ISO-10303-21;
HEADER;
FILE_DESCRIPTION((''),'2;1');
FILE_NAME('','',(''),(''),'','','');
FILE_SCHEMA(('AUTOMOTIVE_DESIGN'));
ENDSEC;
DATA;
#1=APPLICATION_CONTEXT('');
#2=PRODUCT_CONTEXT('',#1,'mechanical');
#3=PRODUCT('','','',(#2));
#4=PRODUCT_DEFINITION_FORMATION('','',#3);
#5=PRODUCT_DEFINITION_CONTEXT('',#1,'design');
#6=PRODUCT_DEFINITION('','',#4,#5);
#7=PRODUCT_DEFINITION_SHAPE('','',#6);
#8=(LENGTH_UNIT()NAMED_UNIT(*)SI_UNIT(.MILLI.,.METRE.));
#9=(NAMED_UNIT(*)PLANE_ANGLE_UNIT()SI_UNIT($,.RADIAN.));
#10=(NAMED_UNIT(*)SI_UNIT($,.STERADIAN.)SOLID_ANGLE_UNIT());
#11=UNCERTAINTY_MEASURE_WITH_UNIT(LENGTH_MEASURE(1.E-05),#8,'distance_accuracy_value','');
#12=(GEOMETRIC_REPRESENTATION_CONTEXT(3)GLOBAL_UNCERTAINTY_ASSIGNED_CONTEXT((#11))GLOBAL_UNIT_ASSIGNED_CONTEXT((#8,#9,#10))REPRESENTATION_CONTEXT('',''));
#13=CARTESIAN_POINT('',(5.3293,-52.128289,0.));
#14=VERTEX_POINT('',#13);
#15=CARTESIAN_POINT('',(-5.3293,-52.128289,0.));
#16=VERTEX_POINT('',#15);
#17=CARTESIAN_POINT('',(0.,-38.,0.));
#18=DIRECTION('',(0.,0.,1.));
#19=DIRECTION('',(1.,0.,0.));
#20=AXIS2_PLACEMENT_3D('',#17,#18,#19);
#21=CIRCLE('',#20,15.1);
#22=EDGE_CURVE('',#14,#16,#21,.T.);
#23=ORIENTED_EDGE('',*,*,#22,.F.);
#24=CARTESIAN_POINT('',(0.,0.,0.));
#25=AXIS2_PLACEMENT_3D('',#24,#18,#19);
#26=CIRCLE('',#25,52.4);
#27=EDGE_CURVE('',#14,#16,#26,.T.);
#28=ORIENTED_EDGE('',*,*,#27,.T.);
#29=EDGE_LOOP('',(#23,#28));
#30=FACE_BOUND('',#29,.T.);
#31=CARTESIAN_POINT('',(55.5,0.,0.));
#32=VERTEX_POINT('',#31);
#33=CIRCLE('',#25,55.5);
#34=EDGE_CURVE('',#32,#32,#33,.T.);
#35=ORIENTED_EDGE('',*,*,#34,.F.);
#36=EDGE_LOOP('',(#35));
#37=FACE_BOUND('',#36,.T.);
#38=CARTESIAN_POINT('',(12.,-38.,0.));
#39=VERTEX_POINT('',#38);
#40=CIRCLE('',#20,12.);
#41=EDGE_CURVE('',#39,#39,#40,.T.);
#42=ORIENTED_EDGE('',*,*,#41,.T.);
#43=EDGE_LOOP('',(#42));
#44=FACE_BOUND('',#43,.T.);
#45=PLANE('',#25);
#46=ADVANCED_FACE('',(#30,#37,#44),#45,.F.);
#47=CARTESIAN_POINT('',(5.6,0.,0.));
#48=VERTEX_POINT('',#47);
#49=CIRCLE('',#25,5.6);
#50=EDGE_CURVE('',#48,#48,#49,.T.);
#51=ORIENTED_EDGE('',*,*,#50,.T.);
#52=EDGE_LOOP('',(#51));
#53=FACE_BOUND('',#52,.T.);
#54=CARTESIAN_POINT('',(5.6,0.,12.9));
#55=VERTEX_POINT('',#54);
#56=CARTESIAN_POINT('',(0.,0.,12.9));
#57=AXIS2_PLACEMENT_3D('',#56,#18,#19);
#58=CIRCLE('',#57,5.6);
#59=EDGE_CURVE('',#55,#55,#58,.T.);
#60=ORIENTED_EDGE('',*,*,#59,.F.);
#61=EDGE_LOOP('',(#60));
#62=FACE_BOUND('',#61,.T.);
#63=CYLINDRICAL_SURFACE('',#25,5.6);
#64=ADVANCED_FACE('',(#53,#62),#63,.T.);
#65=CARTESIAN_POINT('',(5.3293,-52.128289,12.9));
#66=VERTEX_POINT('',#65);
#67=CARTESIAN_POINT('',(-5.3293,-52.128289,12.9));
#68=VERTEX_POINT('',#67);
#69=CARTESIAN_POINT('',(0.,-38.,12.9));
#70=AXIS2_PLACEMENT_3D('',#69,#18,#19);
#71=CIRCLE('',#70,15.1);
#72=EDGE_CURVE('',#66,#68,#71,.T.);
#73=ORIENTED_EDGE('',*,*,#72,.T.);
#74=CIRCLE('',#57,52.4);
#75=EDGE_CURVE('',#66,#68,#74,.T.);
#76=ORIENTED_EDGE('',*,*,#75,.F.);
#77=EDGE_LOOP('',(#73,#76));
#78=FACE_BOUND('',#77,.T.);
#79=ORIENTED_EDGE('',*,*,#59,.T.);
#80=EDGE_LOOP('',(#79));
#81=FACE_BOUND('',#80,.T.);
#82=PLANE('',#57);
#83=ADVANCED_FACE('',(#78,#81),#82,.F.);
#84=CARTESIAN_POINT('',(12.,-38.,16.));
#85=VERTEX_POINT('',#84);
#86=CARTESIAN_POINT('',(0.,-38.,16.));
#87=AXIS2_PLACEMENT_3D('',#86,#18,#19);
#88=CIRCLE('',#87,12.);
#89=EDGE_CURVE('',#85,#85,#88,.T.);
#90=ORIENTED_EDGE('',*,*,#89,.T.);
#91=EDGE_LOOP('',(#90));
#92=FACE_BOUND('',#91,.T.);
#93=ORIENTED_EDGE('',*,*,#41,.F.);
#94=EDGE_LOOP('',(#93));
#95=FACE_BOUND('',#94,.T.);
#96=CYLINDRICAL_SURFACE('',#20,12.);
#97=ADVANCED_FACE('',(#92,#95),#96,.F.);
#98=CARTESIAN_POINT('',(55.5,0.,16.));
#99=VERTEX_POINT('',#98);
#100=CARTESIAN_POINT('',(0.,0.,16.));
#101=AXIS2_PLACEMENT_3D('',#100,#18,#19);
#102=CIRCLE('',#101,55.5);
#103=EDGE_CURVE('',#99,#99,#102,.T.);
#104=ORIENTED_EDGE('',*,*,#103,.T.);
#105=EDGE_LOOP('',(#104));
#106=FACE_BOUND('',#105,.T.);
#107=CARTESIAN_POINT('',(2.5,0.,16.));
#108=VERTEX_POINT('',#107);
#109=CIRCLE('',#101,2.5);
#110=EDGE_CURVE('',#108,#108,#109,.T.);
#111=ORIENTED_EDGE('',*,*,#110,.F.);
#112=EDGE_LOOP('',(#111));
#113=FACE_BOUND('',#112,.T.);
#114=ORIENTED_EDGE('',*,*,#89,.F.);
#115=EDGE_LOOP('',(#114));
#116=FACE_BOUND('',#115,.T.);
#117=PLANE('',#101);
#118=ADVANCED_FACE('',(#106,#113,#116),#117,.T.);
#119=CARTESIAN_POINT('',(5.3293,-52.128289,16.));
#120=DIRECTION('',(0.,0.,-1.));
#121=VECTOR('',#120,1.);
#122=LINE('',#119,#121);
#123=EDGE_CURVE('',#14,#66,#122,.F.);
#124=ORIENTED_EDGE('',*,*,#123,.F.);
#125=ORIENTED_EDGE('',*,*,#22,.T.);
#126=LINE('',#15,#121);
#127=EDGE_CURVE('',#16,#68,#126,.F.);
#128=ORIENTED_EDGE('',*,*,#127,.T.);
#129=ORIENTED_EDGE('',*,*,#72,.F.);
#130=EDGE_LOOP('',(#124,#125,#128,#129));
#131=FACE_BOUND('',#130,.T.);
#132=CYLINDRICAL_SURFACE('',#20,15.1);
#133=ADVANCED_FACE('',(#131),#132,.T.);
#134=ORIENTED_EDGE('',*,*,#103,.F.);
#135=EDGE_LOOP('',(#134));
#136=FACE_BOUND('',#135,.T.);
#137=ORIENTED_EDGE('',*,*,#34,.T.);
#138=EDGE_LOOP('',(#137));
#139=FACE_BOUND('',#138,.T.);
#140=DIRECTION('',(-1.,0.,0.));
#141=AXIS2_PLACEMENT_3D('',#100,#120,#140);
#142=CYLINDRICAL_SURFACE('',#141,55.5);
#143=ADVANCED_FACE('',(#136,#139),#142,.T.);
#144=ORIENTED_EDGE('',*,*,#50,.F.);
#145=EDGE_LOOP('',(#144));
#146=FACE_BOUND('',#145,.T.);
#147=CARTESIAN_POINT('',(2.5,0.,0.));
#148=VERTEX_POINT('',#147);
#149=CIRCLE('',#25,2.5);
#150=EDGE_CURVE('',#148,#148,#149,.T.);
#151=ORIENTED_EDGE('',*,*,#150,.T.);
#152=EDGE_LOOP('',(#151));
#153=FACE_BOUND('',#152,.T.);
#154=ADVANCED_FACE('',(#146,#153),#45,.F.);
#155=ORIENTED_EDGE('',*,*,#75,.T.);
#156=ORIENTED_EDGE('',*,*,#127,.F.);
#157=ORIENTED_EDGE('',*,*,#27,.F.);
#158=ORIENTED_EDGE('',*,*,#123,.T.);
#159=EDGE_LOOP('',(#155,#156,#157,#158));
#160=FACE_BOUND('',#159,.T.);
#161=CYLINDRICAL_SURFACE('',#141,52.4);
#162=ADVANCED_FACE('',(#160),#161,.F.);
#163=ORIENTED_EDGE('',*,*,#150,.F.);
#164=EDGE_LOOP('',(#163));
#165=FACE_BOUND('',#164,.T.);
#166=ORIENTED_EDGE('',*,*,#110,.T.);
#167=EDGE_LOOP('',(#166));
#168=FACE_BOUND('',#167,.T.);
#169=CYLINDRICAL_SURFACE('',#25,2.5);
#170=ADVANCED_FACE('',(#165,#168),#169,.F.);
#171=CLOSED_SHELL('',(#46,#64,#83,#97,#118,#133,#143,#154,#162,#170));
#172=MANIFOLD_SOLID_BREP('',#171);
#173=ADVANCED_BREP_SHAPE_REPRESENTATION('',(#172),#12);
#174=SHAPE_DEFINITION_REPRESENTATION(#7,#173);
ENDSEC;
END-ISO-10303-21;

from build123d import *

# Parameters (mm, degrees)
SKETCH1_R           = 55.5
BOSS_EXTRUDE1_DEPTH = 16
SKETCH2_R           = 12
CUT_EXTRUDE1_DEPTH  = 16
SKETCH3_R           = 2.5
CUT_EXTRUDE2_DEPTH  = 16
SHELL2_OUTLINE_R    = 5.6
SHELL2_DEPTH        = 12.9


# Read off the part's stored shape, not the designer's step: Shell2
with BuildPart() as part:
    # Sketch1 → Boss-Extrude1 (new body)
    with BuildSketch(Plane.XY):
        Circle(SKETCH1_R)
    extrude(amount=BOSS_EXTRUDE1_DEPTH)

    # Sketch2 → Cut-Extrude1 (cut)
    with BuildSketch(Plane.XY.offset(16)):
        with Locations((0, -38)):
            Circle(SKETCH2_R)
    extrude(amount=-CUT_EXTRUDE1_DEPTH, mode=Mode.SUBTRACT)

    # Sketch3 → Cut-Extrude2 (cut)
    with BuildSketch(Plane.XY.offset(16)):
        Circle(SKETCH3_R)
    extrude(amount=-CUT_EXTRUDE2_DEPTH, mode=Mode.SUBTRACT)

    # Shell2 outline → Shell2 (cut)
    with BuildSketch(Plane.XY):
        with BuildLine():
            ThreePointArc((5.329299818, -52.128289474), (0, 52.4), (-5.329299818, -52.128289474))
            ThreePointArc((-5.329299818, -52.128289474), (0, -22.9), (5.329299818, -52.128289474))
        make_face()
        Circle(SHELL2_OUTLINE_R, mode=Mode.SUBTRACT)
    extrude(amount=SHELL2_DEPTH, mode=Mode.SUBTRACT)


solid = part.part
